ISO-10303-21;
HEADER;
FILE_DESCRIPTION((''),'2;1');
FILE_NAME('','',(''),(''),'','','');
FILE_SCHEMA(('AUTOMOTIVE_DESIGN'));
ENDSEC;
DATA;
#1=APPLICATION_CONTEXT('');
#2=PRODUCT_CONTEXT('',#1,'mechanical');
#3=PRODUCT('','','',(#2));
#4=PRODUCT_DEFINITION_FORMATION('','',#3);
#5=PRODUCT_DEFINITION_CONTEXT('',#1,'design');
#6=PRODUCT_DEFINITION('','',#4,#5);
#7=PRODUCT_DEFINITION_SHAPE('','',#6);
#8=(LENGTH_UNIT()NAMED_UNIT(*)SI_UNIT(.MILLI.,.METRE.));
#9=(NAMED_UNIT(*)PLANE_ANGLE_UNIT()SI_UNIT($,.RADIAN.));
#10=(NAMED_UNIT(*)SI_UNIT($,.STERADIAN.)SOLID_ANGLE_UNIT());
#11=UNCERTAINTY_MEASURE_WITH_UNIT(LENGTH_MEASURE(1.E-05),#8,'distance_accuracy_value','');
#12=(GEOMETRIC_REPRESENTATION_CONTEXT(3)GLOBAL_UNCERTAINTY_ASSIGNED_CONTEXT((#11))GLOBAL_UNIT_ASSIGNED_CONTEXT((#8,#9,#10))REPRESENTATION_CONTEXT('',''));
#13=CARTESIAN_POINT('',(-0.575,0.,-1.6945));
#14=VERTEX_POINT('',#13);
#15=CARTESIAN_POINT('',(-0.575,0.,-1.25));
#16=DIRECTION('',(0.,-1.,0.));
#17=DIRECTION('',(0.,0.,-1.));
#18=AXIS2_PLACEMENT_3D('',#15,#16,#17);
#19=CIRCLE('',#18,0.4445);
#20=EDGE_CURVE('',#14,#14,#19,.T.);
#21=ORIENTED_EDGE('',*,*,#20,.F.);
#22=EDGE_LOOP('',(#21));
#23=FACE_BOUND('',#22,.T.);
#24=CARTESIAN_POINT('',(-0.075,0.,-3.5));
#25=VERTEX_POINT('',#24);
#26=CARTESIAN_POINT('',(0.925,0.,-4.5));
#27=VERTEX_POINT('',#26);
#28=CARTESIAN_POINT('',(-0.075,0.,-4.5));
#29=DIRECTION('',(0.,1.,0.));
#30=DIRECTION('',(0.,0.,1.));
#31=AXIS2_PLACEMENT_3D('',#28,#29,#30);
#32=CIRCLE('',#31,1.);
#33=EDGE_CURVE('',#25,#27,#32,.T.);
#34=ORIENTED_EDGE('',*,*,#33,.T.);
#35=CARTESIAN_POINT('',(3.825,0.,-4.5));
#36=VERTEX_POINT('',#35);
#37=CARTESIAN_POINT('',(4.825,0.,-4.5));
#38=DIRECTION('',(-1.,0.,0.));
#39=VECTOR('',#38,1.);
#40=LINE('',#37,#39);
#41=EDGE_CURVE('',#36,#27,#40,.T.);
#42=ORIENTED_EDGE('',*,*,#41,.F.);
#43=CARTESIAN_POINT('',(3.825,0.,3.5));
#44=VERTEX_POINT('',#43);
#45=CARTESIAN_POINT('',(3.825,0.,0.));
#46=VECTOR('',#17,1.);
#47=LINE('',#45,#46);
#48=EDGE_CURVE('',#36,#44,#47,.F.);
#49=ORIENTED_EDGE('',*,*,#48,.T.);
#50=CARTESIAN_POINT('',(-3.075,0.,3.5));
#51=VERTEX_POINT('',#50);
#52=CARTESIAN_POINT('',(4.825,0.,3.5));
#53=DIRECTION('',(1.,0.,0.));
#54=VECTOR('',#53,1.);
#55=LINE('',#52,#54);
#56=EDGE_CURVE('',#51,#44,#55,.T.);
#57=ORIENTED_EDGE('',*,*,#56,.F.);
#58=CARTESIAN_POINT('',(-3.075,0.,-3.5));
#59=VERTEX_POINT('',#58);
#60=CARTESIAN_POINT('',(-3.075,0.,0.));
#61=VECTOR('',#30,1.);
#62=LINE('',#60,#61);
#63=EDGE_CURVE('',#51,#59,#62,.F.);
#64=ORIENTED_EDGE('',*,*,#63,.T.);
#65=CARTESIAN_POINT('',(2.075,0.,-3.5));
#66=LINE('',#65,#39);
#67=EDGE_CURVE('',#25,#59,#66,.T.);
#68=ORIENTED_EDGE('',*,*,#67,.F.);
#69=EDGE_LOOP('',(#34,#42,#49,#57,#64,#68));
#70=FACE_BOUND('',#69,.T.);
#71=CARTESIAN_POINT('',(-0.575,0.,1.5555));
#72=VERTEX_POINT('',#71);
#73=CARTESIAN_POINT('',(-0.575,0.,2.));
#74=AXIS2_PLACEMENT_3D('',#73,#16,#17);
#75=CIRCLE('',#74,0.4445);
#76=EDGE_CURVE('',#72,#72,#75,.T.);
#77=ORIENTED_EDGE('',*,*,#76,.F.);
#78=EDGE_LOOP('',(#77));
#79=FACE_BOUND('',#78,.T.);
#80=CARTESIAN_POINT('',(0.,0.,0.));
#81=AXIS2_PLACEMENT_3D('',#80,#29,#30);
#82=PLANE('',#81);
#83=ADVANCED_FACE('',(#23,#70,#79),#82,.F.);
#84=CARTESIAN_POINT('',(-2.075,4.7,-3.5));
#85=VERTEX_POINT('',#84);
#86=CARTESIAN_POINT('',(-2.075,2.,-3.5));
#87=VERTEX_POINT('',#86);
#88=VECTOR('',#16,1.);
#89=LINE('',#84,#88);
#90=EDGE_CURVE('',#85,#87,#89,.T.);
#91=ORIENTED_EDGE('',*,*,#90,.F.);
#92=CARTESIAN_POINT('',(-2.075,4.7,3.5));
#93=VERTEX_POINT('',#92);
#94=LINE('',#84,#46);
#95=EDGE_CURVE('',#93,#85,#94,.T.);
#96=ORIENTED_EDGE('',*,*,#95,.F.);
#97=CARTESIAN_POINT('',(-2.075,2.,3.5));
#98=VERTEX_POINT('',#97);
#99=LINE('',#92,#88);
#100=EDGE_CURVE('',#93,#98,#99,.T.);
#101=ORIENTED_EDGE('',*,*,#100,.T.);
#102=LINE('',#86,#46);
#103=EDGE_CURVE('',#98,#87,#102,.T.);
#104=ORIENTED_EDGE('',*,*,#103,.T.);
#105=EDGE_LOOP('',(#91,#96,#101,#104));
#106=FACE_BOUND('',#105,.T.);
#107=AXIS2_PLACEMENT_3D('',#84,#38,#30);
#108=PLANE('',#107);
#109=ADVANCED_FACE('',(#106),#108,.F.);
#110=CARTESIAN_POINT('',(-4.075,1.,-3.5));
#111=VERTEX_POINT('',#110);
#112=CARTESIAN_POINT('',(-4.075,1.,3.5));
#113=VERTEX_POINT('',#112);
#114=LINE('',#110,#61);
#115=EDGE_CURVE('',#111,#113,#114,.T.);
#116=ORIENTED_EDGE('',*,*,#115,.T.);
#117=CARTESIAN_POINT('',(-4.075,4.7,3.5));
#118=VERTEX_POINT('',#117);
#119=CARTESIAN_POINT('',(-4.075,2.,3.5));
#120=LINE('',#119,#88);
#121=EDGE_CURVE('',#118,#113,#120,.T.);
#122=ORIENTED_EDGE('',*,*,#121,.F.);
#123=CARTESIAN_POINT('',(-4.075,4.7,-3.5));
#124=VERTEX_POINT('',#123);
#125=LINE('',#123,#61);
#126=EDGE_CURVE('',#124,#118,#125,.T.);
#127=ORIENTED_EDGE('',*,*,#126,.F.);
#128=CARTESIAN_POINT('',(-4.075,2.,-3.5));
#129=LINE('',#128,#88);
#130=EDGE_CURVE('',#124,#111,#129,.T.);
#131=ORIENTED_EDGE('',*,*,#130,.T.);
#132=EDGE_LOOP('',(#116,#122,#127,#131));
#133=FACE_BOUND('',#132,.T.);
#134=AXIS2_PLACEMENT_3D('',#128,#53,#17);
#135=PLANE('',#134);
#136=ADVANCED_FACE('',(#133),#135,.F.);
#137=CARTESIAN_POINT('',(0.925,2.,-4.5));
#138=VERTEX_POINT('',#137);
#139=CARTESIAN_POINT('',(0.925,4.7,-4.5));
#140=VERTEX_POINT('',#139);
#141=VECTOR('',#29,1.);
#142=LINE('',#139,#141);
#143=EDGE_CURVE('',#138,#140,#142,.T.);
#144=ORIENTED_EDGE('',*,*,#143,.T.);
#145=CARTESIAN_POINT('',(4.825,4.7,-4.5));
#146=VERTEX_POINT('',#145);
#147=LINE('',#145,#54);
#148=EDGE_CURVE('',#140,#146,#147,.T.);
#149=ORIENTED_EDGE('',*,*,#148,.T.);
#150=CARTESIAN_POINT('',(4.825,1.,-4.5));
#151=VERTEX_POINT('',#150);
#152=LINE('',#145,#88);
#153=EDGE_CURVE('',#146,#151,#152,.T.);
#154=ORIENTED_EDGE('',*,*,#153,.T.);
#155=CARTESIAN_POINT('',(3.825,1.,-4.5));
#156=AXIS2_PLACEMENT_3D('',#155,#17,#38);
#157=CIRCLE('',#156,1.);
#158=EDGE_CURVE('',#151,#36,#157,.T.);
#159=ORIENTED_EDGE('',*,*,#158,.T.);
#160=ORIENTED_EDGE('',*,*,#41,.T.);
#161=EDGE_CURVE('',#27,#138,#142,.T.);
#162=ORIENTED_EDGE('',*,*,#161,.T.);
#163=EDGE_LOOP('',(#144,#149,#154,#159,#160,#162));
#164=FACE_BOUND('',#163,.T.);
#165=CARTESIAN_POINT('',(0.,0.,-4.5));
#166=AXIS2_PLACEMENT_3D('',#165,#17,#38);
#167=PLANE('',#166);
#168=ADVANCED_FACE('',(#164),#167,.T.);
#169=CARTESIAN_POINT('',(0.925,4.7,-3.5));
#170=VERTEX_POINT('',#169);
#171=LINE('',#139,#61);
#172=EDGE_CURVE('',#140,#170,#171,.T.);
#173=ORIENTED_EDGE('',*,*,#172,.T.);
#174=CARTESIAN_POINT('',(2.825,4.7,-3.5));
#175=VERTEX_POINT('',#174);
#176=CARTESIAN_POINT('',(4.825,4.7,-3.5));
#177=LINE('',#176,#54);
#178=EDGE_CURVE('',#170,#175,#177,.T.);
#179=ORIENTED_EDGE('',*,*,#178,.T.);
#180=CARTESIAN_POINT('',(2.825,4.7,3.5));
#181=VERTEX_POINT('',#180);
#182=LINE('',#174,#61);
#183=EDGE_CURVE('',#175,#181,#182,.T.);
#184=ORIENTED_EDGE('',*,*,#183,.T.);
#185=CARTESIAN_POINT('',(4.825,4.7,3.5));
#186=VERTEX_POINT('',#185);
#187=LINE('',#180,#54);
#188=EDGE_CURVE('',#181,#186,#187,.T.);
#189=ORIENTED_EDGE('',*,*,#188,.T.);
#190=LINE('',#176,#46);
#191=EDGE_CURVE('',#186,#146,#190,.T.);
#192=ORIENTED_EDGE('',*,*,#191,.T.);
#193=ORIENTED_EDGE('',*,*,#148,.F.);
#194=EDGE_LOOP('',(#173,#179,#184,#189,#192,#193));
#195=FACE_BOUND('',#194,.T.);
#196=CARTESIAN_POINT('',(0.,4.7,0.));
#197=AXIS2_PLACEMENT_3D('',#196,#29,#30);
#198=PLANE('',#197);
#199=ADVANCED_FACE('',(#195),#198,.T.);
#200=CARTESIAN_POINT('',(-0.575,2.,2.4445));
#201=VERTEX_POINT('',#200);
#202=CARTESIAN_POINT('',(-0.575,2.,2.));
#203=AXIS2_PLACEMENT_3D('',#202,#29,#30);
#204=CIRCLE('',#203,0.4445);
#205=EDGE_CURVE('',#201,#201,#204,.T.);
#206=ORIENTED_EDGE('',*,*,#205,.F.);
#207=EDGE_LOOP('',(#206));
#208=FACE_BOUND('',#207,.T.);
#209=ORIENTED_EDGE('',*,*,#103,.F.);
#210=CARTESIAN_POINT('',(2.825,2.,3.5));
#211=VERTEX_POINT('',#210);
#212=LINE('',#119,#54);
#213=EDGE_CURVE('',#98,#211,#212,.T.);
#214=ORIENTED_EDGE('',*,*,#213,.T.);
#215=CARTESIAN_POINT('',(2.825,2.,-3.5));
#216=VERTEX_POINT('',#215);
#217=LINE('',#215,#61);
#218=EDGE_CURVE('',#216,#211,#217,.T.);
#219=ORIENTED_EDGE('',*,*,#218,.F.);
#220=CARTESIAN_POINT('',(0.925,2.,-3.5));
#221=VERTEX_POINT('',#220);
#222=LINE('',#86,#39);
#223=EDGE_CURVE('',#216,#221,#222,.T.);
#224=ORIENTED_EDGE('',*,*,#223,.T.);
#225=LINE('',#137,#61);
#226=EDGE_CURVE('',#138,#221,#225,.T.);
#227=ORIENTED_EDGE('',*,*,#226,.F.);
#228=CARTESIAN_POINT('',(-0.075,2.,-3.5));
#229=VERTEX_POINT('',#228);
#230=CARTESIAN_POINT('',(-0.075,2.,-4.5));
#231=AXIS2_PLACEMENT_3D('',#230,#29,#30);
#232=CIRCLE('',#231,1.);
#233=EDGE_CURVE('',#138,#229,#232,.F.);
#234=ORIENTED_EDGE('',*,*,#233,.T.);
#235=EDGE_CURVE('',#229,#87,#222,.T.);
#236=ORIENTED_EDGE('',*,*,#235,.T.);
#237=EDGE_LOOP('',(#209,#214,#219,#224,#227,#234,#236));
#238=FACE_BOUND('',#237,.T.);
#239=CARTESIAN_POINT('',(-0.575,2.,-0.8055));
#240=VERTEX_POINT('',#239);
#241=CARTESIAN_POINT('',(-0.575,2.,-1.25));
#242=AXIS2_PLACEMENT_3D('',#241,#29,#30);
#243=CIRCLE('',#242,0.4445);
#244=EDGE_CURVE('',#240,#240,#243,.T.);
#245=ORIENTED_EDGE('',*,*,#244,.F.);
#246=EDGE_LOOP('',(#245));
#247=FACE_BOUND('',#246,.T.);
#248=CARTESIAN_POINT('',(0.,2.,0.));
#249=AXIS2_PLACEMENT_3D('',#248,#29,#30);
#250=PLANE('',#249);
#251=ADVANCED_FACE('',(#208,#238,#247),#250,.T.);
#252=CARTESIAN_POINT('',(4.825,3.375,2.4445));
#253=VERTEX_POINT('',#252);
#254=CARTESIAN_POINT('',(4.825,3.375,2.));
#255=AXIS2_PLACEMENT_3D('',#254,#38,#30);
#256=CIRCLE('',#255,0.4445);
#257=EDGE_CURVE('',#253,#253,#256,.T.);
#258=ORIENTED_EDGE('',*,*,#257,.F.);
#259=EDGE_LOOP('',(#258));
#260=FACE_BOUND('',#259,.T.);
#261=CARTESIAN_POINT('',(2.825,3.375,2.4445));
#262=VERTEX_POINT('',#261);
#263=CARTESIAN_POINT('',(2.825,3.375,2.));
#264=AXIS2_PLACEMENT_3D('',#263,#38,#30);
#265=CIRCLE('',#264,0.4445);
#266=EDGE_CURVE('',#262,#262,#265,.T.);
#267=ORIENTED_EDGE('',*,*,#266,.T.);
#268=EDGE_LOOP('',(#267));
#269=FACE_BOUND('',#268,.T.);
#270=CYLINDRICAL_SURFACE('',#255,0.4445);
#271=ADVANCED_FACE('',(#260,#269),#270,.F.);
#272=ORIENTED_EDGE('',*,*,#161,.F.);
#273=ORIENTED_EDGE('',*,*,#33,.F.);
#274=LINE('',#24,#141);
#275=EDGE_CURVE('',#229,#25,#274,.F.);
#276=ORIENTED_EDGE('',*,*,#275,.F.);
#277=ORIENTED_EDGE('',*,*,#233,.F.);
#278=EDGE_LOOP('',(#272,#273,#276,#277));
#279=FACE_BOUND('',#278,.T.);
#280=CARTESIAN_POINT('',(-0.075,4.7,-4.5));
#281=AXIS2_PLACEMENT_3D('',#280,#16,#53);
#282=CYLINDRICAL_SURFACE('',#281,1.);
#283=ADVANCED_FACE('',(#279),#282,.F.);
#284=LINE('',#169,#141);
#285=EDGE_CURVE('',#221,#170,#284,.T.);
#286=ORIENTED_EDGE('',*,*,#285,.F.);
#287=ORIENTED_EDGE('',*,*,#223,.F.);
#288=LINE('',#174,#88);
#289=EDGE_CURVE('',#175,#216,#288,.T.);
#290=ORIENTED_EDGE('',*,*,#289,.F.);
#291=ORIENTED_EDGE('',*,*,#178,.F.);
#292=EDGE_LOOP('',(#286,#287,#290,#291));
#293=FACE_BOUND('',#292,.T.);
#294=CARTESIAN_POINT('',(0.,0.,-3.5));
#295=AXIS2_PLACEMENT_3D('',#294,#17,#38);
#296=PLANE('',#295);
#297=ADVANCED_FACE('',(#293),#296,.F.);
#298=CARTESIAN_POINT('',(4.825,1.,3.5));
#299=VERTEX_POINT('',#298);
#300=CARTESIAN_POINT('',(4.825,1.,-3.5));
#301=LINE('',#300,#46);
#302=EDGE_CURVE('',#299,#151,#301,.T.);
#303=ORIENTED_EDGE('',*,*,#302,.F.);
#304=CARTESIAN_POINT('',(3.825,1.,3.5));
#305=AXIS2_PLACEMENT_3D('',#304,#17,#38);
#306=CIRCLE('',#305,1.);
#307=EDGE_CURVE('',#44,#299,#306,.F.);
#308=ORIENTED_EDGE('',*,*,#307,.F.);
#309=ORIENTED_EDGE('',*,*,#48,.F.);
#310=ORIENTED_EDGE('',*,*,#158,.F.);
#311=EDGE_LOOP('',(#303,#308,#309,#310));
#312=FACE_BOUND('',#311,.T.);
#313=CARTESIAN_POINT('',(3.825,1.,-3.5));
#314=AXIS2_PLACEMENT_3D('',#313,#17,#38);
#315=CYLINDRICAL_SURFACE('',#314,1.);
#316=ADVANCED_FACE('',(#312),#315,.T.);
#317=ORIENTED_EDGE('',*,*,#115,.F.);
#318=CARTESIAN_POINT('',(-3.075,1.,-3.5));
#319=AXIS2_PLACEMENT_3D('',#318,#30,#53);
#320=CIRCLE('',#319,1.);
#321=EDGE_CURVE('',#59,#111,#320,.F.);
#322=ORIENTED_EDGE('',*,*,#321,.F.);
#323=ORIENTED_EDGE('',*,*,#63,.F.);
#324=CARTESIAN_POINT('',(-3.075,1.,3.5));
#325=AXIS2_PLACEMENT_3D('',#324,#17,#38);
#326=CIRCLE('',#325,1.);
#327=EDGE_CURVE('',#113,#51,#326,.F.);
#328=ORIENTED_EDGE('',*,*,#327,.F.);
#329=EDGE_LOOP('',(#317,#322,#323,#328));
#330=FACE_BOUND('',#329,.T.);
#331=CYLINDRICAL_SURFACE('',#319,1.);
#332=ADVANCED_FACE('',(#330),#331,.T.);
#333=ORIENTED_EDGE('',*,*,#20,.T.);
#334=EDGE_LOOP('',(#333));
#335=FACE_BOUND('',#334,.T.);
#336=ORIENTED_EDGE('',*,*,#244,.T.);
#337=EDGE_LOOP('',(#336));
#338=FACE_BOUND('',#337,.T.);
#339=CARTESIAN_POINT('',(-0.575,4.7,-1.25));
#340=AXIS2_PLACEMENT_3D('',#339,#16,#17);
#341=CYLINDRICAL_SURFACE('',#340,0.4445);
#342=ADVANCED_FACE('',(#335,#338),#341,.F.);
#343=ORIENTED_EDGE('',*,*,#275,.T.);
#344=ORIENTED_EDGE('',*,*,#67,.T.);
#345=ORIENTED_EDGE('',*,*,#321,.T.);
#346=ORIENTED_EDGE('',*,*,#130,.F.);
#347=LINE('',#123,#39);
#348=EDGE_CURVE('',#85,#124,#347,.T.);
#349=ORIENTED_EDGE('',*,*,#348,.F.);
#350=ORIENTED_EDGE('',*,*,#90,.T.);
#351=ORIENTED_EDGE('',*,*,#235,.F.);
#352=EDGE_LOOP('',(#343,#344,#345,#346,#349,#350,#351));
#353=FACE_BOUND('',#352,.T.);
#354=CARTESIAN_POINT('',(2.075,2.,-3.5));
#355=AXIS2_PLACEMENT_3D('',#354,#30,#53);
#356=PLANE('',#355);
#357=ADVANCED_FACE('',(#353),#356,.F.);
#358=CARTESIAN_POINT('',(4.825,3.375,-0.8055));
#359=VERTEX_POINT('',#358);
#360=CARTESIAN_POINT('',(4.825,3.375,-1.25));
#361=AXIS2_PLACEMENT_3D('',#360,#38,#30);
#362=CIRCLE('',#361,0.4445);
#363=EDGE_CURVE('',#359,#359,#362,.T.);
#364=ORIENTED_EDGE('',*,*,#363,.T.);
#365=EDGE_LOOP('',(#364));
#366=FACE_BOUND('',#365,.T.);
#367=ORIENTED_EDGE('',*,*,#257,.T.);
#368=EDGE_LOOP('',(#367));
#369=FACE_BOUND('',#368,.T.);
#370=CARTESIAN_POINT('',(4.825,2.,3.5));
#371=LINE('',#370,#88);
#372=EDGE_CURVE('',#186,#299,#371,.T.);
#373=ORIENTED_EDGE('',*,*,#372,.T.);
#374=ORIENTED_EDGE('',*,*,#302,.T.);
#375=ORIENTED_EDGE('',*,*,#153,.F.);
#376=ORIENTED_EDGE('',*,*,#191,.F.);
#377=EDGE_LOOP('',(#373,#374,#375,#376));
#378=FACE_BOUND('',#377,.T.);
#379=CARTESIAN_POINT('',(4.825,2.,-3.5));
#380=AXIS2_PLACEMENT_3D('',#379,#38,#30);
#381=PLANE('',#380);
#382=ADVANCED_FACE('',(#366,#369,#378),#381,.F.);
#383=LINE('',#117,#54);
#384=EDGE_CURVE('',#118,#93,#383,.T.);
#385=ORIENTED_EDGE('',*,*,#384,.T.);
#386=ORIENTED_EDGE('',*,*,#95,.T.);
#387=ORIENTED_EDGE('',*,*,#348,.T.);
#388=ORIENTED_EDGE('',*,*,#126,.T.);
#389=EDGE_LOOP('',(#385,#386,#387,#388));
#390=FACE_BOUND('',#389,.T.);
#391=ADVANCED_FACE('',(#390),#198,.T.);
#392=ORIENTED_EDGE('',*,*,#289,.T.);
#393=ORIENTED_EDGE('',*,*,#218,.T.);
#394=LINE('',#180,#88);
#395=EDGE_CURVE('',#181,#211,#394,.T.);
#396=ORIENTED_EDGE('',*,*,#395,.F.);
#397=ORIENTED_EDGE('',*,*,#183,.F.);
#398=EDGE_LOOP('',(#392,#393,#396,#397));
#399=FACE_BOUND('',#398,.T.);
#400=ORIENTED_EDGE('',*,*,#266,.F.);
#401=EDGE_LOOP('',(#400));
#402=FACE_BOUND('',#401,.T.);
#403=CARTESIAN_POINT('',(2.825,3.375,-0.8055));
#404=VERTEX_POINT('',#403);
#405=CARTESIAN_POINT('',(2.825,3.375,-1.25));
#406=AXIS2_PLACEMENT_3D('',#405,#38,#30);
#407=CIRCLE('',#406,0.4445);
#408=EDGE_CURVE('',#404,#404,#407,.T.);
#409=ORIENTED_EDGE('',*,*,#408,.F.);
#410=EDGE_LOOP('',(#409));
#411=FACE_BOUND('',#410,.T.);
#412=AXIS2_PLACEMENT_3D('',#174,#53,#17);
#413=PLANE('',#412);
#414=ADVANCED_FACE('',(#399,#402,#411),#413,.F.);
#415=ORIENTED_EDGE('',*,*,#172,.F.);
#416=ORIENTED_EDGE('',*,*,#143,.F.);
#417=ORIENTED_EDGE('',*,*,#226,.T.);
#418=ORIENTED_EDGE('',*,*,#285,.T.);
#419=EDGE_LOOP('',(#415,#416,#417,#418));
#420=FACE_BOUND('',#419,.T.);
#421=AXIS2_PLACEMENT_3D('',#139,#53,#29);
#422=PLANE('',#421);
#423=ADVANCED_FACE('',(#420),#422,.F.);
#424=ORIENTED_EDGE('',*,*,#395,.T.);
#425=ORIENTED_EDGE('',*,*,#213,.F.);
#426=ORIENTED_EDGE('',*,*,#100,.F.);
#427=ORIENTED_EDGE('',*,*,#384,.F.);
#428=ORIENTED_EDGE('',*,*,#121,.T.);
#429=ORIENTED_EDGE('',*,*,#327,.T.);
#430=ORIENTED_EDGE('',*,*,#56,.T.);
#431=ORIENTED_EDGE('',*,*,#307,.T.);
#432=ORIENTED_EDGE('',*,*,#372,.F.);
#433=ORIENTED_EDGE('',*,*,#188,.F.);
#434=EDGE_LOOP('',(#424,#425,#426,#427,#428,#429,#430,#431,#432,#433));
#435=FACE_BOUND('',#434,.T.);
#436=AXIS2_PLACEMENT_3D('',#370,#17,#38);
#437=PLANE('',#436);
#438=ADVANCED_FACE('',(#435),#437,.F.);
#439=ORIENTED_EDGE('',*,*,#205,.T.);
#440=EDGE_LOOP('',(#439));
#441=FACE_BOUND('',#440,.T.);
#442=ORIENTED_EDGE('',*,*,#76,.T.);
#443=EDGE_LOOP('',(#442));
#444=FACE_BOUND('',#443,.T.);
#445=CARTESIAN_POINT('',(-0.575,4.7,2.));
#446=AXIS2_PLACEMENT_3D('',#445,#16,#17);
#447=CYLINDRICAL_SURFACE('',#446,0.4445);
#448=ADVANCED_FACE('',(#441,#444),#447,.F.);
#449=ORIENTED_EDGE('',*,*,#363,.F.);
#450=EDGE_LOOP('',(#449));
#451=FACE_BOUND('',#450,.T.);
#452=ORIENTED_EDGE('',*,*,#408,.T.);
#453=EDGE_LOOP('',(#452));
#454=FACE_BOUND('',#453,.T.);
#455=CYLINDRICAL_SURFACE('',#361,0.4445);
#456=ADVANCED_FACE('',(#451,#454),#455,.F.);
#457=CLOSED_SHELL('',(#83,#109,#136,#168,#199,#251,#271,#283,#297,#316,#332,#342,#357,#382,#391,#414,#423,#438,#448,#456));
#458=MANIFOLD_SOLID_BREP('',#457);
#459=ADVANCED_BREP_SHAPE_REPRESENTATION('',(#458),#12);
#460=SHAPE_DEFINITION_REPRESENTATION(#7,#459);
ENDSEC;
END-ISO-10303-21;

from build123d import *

# Parameters (mm, degrees)
BOSS_EXTRUDE1_DEPTH = 2
SKETCH2_W           = 2
SKETCH2_H           = 7
BOSS_EXTRUDE2_DEPTH = 2.7
SKETCH3_R           = 0.4445
CUT_EXTRUDE1_DEPTH  = 10.052623929
SKETCH5_W           = 3.9
SKETCH5_H           = 4.7
BOSS_EXTRUDE3_DEPTH = 1
FILLET1_R           = 1
SKETCH6_R           = 0.4445
CUT_EXTRUDE2_DEPTH  = 9.100655838
FILLET2_R           = 1


with BuildPart() as part:
    # Sketch1 → Boss-Extrude1 (new body)
    with BuildSketch(Plane(origin=(0, 0, 0), x_dir=(1, 0, 0), z_dir=(0, 1, 0))):
        Polygon((2.075, -3.5), (2.825, -3.5), (3.825, -3.5), (4.825, -3.5), (4.825, 3.5), (3.825, 3.5), (2.825, 3.5), (2.075, 3.5), (-2.075, 3.5), (-4.075, 3.5), (-4.075, -3.5), (-2.075, -3.5), align=None)
    extrude(amount=BOSS_EXTRUDE1_DEPTH)

    # Sketch2 → Boss-Extrude2 (add)
    with BuildSketch(Plane(origin=(0, 2, 0), x_dir=(1, 0, 0), z_dir=(0, 1, 0))):
        with Locations((-3.075, 0)):
            Rectangle(SKETCH2_W, SKETCH2_H)
        with Locations((3.825, 0)):
            Rectangle(SKETCH2_W, SKETCH2_H)
    extrude(amount=BOSS_EXTRUDE2_DEPTH)

    # Sketch3 → Cut-Extrude1 (cut, through all)
    with BuildSketch(Plane.ZY.offset(-2.825)):
        with Locations((-1.25, 3.375)):
            Circle(SKETCH3_R)
        with Locations((2, 3.375)):
            Circle(SKETCH3_R)
    extrude(amount=-CUT_EXTRUDE1_DEPTH, mode=Mode.SUBTRACT)

    # Sketch5 → Boss-Extrude3 (add)
    with BuildSketch(Plane(origin=(0, 0, -3.5), x_dir=(-1, 0, 0), z_dir=(0, 0, -1))):
        with Locations((-2.875, 2.35)):
            Rectangle(SKETCH5_W, SKETCH5_H)
    extrude(amount=BOSS_EXTRUDE3_DEPTH)

    # Fillet1
    fillet1_edges = [part.edges().sort_by_distance(p)[0] for p in [
        (0.925, 1, -3.5),
    ]]
    fillet(fillet1_edges, radius=FILLET1_R - 0.0001)  # a hair under: the kernel refuses the full size

    # Sketch6 → Cut-Extrude2 (cut, through all)
    with BuildSketch(Plane.XZ):
        with Locations(Location((-0.575, 2, 0), (0, 0, 270))):
            Circle(SKETCH6_R)
        with Locations(Location((-0.575, -1.25, 0), (0, 0, 270))):
            Circle(SKETCH6_R)
    extrude(amount=-CUT_EXTRUDE2_DEPTH, mode=Mode.SUBTRACT)

    # Fillet2
    fillet2_edges = [part.edges().sort_by_distance(p)[0] for p in [
        (4.825, 0, -0.5),
        (-4.075, 0, 0),
    ]]
    fillet(fillet2_edges, radius=FILLET2_R)


solid = part.part
